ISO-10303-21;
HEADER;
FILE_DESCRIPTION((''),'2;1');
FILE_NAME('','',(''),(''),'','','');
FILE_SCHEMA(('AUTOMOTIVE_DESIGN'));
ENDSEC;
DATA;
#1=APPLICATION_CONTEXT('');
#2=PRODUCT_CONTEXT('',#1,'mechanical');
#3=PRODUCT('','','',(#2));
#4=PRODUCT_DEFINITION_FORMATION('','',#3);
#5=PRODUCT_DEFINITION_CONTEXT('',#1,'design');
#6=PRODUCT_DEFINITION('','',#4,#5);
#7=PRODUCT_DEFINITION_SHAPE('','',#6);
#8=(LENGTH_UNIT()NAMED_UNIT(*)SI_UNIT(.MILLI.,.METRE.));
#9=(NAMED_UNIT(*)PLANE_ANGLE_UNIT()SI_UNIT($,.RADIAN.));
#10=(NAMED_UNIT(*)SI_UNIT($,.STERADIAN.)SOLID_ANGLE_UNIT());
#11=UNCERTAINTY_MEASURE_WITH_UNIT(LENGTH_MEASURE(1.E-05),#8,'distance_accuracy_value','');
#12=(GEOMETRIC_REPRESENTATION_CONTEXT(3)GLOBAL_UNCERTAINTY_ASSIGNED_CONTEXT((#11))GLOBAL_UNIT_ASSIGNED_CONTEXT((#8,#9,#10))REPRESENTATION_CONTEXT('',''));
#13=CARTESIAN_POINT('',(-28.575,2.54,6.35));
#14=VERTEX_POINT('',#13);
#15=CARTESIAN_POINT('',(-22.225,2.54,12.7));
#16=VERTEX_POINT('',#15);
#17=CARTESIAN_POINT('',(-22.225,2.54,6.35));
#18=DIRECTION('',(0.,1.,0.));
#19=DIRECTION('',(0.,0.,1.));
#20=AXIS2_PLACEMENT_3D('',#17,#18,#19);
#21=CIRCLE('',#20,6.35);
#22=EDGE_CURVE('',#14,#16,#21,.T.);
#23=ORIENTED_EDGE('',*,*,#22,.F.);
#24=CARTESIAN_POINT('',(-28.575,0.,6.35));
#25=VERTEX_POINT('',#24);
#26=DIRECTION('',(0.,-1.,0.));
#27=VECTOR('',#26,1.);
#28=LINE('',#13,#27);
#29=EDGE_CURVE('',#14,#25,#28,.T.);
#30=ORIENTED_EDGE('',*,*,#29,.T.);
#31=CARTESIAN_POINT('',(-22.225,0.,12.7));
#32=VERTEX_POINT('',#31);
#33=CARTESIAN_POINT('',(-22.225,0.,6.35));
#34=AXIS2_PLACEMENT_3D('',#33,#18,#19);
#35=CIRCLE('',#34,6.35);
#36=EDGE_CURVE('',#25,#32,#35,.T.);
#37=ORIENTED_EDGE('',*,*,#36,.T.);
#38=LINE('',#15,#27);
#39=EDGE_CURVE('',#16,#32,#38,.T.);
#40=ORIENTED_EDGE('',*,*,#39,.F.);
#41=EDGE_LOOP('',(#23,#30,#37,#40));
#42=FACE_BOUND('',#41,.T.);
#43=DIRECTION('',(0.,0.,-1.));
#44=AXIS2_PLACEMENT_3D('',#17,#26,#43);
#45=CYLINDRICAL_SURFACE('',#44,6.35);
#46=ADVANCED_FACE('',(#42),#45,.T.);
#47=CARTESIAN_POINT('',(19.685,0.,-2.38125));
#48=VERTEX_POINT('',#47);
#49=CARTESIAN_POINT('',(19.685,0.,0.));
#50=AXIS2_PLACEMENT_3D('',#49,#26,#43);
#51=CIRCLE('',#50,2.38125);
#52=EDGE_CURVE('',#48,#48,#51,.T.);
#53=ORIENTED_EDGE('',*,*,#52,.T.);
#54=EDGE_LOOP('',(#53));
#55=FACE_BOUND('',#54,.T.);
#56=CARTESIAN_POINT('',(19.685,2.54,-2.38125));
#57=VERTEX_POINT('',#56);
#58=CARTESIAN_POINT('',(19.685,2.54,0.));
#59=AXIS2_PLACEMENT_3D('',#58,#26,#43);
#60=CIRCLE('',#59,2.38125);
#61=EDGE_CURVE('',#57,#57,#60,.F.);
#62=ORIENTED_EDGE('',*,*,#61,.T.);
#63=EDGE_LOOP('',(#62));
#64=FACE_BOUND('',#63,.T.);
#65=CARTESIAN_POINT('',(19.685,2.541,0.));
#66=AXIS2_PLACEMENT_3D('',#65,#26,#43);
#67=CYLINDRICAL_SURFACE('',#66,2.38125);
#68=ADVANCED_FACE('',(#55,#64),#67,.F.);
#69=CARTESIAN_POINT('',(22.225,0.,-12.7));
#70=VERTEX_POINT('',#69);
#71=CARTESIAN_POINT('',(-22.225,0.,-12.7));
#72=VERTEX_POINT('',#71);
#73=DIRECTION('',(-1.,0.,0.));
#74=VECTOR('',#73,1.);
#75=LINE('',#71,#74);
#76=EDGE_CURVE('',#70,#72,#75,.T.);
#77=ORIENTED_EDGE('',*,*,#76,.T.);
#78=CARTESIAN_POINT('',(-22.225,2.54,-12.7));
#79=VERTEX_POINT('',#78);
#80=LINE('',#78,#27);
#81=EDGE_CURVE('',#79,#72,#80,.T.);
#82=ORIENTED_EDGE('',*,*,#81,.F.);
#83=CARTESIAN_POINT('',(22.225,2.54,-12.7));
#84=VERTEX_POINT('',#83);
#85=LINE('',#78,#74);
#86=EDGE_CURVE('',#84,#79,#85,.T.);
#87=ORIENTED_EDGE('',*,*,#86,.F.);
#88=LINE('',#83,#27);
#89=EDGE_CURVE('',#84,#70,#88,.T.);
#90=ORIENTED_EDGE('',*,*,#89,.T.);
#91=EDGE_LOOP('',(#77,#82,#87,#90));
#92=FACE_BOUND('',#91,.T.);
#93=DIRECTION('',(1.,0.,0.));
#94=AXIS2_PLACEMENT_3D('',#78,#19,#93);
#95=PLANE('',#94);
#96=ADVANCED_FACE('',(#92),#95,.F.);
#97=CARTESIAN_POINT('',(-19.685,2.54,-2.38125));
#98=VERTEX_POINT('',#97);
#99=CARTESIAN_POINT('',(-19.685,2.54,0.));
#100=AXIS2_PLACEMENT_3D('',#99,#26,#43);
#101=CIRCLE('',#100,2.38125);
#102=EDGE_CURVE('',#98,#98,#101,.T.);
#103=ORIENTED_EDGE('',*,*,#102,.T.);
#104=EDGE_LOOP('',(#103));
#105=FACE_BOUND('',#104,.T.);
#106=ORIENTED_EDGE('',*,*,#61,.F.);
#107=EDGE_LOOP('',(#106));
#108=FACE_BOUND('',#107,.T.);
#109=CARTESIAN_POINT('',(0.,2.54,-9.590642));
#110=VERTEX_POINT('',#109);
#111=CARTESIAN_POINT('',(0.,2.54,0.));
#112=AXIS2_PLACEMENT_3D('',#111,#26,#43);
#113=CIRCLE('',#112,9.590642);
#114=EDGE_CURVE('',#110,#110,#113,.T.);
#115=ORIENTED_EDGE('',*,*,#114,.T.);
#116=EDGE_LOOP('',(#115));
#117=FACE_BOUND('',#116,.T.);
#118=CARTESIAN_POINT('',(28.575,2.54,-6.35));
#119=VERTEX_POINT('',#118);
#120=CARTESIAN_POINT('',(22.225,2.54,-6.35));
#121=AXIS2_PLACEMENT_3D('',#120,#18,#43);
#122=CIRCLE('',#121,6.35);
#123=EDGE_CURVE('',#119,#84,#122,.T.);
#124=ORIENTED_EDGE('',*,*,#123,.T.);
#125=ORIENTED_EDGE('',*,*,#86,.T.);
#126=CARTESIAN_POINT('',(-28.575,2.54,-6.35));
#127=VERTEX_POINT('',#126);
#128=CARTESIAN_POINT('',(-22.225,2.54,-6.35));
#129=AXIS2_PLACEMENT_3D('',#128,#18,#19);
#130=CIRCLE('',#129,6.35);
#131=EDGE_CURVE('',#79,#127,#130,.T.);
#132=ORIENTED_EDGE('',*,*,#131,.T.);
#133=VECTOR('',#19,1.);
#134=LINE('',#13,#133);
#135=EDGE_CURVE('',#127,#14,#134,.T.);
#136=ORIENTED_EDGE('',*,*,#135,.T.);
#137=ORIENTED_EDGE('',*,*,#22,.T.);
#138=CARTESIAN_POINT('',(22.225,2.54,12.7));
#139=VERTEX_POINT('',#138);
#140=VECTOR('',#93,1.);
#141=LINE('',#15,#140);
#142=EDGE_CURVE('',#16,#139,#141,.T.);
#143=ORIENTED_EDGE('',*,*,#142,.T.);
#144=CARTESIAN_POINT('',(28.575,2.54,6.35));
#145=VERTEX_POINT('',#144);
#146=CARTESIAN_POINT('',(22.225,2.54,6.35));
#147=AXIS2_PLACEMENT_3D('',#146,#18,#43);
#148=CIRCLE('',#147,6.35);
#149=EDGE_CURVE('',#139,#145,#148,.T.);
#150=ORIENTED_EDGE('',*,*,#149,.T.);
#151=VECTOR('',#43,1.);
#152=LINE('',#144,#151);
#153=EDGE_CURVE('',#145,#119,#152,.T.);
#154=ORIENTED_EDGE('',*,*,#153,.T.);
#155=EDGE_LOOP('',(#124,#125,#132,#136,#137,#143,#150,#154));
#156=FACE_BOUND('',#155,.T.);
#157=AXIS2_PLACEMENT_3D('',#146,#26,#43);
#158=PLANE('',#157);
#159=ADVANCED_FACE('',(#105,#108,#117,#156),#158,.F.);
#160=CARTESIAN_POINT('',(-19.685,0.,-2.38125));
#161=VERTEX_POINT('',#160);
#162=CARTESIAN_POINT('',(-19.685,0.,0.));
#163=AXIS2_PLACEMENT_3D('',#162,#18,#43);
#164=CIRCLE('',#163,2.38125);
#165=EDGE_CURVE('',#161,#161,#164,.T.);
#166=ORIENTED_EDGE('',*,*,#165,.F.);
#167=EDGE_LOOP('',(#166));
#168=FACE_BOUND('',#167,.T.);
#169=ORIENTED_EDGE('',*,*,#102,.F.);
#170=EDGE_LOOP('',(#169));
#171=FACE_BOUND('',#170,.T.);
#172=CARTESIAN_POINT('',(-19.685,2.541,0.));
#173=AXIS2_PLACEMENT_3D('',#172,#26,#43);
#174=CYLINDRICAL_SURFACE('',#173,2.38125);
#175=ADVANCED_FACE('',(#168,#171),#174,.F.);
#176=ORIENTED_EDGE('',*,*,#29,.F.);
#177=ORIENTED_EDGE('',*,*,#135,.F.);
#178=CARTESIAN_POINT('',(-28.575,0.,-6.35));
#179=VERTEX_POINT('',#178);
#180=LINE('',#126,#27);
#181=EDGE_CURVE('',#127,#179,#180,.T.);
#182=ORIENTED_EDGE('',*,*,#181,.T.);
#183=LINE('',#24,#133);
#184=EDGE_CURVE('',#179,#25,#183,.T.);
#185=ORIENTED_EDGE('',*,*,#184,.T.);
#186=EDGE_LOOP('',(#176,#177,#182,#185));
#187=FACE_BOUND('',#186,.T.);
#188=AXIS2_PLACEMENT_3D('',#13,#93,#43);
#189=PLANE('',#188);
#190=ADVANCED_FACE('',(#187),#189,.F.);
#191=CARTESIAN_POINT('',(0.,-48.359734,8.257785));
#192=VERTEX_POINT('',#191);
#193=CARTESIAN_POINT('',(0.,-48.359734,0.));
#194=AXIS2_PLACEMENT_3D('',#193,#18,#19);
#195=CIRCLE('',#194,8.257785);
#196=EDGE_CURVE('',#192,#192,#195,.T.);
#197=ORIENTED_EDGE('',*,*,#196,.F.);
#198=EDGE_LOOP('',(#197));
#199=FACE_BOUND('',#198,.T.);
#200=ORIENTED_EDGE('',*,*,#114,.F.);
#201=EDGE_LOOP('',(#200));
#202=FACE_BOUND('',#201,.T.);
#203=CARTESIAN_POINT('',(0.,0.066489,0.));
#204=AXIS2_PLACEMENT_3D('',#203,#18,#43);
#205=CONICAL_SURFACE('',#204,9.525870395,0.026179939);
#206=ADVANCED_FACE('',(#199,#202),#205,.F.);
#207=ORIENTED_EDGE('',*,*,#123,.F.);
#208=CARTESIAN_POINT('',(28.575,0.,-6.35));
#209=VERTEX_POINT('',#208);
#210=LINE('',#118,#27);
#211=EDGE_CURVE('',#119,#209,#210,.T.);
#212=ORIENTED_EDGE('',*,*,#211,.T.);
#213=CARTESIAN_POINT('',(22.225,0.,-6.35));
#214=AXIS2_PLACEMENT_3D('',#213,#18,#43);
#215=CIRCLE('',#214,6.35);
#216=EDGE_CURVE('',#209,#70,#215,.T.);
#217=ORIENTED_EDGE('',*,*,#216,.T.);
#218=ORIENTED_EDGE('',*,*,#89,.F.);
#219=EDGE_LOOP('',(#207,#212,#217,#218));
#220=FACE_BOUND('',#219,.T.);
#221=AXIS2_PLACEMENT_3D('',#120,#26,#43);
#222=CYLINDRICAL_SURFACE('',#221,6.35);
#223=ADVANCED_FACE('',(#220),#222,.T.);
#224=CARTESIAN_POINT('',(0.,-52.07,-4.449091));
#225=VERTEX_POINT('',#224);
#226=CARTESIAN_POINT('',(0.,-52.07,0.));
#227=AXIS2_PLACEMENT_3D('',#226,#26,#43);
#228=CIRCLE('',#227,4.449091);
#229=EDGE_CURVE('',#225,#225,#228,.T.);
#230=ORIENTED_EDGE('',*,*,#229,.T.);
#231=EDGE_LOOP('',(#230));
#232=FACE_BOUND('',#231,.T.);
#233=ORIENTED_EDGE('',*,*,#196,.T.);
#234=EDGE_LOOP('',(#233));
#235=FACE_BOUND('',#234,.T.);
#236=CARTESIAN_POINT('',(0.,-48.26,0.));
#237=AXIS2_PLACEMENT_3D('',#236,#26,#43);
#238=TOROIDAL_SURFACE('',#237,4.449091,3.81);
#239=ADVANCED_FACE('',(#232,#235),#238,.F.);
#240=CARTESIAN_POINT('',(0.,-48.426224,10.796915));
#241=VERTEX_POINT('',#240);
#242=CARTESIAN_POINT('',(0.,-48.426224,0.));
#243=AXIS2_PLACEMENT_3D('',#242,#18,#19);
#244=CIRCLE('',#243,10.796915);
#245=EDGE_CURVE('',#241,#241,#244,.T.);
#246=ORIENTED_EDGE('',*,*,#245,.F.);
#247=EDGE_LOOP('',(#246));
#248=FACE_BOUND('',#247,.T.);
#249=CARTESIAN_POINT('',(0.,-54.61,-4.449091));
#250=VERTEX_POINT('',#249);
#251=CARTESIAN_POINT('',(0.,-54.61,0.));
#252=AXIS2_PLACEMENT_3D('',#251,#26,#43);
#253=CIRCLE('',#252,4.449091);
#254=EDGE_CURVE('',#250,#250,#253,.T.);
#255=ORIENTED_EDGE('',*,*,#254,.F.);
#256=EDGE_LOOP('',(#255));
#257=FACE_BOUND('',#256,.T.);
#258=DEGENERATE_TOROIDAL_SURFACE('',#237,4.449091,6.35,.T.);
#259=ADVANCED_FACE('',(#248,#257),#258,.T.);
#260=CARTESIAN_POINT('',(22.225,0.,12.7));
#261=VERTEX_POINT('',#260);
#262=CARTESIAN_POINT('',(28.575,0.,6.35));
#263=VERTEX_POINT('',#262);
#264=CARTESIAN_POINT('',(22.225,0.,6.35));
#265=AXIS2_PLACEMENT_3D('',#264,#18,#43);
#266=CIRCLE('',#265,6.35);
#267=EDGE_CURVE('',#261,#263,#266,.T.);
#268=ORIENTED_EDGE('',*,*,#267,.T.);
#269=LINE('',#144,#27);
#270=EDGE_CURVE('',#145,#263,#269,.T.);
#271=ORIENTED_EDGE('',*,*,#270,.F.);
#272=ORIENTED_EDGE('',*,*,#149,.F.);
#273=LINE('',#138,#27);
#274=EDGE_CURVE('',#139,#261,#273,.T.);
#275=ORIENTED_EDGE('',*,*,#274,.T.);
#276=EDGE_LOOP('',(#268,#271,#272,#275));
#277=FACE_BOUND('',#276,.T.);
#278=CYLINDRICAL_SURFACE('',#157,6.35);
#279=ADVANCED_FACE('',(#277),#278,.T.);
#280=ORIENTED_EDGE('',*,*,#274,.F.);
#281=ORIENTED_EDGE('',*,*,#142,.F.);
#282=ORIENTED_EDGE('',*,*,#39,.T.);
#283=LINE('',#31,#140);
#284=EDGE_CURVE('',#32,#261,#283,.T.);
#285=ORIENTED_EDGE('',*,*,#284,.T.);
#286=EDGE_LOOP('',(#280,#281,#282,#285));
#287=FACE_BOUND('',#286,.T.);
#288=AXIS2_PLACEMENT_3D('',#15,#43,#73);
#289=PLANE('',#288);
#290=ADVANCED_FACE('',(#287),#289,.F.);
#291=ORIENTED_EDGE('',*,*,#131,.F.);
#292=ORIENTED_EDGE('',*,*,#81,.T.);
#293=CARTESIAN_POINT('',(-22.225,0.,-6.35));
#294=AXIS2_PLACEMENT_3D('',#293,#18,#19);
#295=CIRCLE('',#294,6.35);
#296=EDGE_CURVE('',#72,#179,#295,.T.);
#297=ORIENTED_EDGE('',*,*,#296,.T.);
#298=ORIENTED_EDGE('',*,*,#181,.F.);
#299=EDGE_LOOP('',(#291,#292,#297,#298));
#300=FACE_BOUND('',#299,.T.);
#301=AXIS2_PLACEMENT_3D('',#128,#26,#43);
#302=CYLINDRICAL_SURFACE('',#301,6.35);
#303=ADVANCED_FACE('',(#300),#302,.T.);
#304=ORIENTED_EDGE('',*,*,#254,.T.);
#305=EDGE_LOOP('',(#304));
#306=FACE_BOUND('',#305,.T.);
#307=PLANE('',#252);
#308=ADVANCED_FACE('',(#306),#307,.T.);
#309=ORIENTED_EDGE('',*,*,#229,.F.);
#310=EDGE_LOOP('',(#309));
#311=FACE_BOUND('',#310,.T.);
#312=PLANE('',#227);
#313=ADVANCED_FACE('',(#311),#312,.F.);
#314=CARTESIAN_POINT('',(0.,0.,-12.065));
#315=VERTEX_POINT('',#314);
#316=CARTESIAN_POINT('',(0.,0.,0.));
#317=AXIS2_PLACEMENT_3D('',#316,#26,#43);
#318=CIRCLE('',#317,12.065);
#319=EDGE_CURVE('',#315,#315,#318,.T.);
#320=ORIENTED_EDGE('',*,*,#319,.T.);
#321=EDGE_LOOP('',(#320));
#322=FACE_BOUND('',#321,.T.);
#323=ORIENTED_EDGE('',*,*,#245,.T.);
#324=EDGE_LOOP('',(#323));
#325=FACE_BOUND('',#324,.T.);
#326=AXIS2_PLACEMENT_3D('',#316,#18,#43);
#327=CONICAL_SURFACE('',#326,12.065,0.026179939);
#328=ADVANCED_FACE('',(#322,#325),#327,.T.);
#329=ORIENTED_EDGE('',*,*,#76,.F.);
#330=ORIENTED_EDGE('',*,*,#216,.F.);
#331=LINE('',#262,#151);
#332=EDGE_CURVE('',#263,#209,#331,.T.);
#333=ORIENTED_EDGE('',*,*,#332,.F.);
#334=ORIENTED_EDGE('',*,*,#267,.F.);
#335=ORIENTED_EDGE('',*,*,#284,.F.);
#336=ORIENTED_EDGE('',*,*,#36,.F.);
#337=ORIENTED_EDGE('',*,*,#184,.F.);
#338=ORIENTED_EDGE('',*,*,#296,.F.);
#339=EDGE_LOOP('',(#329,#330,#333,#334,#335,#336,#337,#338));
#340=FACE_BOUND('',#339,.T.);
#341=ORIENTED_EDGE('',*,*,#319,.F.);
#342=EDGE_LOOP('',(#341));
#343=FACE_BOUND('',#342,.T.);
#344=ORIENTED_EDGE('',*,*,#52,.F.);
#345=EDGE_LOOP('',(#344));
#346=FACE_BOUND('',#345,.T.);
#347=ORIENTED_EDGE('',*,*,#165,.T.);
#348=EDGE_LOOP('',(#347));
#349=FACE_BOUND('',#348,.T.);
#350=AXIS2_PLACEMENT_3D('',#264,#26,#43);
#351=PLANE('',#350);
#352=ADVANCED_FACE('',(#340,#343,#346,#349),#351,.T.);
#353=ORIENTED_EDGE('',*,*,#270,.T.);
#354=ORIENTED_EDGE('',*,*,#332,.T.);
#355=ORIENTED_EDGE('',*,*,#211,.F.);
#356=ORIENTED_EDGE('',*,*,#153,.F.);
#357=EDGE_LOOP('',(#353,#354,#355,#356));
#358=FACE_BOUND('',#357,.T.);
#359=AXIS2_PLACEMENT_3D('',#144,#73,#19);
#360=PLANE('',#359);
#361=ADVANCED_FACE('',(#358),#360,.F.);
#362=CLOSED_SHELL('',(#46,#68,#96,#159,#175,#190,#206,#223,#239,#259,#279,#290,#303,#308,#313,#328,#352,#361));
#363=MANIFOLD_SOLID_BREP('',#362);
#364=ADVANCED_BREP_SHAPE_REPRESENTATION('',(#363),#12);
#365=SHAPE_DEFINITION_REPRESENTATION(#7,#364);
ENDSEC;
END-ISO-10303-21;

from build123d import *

# Parameters (mm, degrees)
BOSS_EXTRUDE1_DEPTH = 2.54
SKETCH2_R           = 12.065
BOSS_EXTRUDE2_DEPTH = 54.61
DRAFT2_ANGLE        = 1.5
FILLET2_R           = 6.35
CUT_EXTRUDE1_REACH  = 64.929
SKETCH3_R           = 2.38125


# Read off the part's stored shape, not the designer's step: Shell1
with BuildPart() as part:
    # Sketch1 → Boss-Extrude1 (new body)
    with BuildSketch(Plane(origin=(0, 0, 0), x_dir=(1, 0, 0), z_dir=(0, 1, 0))):
        with BuildLine():
            Line((-22.225, -12.7), (22.225, -12.7))
            ThreePointArc((22.225, -12.7), (26.715128061, -10.840128061), (28.575, -6.35))
            Line((28.575, -6.35), (28.575, 6.35))
            ThreePointArc((28.575, 6.35), (26.715128061, 10.840128061), (22.225, 12.7))
            Line((22.225, 12.7), (-22.225, 12.7))
            ThreePointArc((-22.225, 12.7), (-26.715128061, 10.840128061), (-28.575, 6.35))
            Line((-28.575, 6.35), (-28.575, -6.35))
            ThreePointArc((-28.575, -6.35), (-26.715128061, -10.840128061), (-22.225, -12.7))
        make_face()
    extrude(amount=BOSS_EXTRUDE1_DEPTH)

    # Sketch2 → Boss-Extrude2 (add)
    with BuildSketch(Plane.XZ):
        with Locations(Location((0, 0, 0), (0, 0, 270))):
            Circle(SKETCH2_R)
    extrude(amount=BOSS_EXTRUDE2_DEPTH)

    # Draft2
    draft2_faces = [part.faces().sort_by_distance(p)[0] for p in [
        (0, -27.305, 12.065),
    ]]
    draft(draft2_faces, Plane(origin=(22.225, 0, 6.35), x_dir=(0, 0, -1), z_dir=(0, -1, 0)), DRAFT2_ANGLE)

    # Fillet2
    fillet2_edges = [part.edges().sort_by_distance(p)[0] for p in [
        (0, -54.61, 10.634986823),
    ]]
    fillet(fillet2_edges, radius=FILLET2_R)

    # Shell1 outline → Shell1 (revolve, cut)
    with BuildSketch(Plane.XY):
        with BuildLine():
            ThreePointArc((4.449090693, -52.07), (7.107672345, -50.989110404), (8.257785101, -48.359734173))
            Line((8.257785101, -48.359734173), (9.590641548, 2.54))
            Line((9.590641548, 2.54), (0, 2.54))
            Line((0, 2.54), (0, -52.07))
            Line((0, -52.07), (4.449090693, -52.07))
        make_face()
    revolve(axis=Axis((0, 0, 0), (0, 1, 0)), mode=Mode.SUBTRACT)

    # Sketch3 → Cut-Extrude1 (cut, up to next)
    with BuildSketch(Plane.XZ, mode=Mode.PRIVATE) as cut_extrude1_sk1:
        with Locations(Location((19.685, 0, 0), (0, 0, 270))):
            Circle(SKETCH3_R)
    cut_extrude1_tool1 = extrude(cut_extrude1_sk1.sketch, amount=-CUT_EXTRUDE1_REACH, mode=Mode.PRIVATE) & part.part
    cut_extrude1 = cut_extrude1_tool1.solids().sort_by_distance((19.685, 0, 0))[0]
    add(cut_extrude1, mode=Mode.SUBTRACT)

    # Mirror1: Cut-Extrude1 across plane
    add(cut_extrude1.mirror(Plane(origin=(0, 0, 0), x_dir=(0, 0, 1), z_dir=(1, 0, 0))), mode=Mode.SUBTRACT)


solid = part.part
